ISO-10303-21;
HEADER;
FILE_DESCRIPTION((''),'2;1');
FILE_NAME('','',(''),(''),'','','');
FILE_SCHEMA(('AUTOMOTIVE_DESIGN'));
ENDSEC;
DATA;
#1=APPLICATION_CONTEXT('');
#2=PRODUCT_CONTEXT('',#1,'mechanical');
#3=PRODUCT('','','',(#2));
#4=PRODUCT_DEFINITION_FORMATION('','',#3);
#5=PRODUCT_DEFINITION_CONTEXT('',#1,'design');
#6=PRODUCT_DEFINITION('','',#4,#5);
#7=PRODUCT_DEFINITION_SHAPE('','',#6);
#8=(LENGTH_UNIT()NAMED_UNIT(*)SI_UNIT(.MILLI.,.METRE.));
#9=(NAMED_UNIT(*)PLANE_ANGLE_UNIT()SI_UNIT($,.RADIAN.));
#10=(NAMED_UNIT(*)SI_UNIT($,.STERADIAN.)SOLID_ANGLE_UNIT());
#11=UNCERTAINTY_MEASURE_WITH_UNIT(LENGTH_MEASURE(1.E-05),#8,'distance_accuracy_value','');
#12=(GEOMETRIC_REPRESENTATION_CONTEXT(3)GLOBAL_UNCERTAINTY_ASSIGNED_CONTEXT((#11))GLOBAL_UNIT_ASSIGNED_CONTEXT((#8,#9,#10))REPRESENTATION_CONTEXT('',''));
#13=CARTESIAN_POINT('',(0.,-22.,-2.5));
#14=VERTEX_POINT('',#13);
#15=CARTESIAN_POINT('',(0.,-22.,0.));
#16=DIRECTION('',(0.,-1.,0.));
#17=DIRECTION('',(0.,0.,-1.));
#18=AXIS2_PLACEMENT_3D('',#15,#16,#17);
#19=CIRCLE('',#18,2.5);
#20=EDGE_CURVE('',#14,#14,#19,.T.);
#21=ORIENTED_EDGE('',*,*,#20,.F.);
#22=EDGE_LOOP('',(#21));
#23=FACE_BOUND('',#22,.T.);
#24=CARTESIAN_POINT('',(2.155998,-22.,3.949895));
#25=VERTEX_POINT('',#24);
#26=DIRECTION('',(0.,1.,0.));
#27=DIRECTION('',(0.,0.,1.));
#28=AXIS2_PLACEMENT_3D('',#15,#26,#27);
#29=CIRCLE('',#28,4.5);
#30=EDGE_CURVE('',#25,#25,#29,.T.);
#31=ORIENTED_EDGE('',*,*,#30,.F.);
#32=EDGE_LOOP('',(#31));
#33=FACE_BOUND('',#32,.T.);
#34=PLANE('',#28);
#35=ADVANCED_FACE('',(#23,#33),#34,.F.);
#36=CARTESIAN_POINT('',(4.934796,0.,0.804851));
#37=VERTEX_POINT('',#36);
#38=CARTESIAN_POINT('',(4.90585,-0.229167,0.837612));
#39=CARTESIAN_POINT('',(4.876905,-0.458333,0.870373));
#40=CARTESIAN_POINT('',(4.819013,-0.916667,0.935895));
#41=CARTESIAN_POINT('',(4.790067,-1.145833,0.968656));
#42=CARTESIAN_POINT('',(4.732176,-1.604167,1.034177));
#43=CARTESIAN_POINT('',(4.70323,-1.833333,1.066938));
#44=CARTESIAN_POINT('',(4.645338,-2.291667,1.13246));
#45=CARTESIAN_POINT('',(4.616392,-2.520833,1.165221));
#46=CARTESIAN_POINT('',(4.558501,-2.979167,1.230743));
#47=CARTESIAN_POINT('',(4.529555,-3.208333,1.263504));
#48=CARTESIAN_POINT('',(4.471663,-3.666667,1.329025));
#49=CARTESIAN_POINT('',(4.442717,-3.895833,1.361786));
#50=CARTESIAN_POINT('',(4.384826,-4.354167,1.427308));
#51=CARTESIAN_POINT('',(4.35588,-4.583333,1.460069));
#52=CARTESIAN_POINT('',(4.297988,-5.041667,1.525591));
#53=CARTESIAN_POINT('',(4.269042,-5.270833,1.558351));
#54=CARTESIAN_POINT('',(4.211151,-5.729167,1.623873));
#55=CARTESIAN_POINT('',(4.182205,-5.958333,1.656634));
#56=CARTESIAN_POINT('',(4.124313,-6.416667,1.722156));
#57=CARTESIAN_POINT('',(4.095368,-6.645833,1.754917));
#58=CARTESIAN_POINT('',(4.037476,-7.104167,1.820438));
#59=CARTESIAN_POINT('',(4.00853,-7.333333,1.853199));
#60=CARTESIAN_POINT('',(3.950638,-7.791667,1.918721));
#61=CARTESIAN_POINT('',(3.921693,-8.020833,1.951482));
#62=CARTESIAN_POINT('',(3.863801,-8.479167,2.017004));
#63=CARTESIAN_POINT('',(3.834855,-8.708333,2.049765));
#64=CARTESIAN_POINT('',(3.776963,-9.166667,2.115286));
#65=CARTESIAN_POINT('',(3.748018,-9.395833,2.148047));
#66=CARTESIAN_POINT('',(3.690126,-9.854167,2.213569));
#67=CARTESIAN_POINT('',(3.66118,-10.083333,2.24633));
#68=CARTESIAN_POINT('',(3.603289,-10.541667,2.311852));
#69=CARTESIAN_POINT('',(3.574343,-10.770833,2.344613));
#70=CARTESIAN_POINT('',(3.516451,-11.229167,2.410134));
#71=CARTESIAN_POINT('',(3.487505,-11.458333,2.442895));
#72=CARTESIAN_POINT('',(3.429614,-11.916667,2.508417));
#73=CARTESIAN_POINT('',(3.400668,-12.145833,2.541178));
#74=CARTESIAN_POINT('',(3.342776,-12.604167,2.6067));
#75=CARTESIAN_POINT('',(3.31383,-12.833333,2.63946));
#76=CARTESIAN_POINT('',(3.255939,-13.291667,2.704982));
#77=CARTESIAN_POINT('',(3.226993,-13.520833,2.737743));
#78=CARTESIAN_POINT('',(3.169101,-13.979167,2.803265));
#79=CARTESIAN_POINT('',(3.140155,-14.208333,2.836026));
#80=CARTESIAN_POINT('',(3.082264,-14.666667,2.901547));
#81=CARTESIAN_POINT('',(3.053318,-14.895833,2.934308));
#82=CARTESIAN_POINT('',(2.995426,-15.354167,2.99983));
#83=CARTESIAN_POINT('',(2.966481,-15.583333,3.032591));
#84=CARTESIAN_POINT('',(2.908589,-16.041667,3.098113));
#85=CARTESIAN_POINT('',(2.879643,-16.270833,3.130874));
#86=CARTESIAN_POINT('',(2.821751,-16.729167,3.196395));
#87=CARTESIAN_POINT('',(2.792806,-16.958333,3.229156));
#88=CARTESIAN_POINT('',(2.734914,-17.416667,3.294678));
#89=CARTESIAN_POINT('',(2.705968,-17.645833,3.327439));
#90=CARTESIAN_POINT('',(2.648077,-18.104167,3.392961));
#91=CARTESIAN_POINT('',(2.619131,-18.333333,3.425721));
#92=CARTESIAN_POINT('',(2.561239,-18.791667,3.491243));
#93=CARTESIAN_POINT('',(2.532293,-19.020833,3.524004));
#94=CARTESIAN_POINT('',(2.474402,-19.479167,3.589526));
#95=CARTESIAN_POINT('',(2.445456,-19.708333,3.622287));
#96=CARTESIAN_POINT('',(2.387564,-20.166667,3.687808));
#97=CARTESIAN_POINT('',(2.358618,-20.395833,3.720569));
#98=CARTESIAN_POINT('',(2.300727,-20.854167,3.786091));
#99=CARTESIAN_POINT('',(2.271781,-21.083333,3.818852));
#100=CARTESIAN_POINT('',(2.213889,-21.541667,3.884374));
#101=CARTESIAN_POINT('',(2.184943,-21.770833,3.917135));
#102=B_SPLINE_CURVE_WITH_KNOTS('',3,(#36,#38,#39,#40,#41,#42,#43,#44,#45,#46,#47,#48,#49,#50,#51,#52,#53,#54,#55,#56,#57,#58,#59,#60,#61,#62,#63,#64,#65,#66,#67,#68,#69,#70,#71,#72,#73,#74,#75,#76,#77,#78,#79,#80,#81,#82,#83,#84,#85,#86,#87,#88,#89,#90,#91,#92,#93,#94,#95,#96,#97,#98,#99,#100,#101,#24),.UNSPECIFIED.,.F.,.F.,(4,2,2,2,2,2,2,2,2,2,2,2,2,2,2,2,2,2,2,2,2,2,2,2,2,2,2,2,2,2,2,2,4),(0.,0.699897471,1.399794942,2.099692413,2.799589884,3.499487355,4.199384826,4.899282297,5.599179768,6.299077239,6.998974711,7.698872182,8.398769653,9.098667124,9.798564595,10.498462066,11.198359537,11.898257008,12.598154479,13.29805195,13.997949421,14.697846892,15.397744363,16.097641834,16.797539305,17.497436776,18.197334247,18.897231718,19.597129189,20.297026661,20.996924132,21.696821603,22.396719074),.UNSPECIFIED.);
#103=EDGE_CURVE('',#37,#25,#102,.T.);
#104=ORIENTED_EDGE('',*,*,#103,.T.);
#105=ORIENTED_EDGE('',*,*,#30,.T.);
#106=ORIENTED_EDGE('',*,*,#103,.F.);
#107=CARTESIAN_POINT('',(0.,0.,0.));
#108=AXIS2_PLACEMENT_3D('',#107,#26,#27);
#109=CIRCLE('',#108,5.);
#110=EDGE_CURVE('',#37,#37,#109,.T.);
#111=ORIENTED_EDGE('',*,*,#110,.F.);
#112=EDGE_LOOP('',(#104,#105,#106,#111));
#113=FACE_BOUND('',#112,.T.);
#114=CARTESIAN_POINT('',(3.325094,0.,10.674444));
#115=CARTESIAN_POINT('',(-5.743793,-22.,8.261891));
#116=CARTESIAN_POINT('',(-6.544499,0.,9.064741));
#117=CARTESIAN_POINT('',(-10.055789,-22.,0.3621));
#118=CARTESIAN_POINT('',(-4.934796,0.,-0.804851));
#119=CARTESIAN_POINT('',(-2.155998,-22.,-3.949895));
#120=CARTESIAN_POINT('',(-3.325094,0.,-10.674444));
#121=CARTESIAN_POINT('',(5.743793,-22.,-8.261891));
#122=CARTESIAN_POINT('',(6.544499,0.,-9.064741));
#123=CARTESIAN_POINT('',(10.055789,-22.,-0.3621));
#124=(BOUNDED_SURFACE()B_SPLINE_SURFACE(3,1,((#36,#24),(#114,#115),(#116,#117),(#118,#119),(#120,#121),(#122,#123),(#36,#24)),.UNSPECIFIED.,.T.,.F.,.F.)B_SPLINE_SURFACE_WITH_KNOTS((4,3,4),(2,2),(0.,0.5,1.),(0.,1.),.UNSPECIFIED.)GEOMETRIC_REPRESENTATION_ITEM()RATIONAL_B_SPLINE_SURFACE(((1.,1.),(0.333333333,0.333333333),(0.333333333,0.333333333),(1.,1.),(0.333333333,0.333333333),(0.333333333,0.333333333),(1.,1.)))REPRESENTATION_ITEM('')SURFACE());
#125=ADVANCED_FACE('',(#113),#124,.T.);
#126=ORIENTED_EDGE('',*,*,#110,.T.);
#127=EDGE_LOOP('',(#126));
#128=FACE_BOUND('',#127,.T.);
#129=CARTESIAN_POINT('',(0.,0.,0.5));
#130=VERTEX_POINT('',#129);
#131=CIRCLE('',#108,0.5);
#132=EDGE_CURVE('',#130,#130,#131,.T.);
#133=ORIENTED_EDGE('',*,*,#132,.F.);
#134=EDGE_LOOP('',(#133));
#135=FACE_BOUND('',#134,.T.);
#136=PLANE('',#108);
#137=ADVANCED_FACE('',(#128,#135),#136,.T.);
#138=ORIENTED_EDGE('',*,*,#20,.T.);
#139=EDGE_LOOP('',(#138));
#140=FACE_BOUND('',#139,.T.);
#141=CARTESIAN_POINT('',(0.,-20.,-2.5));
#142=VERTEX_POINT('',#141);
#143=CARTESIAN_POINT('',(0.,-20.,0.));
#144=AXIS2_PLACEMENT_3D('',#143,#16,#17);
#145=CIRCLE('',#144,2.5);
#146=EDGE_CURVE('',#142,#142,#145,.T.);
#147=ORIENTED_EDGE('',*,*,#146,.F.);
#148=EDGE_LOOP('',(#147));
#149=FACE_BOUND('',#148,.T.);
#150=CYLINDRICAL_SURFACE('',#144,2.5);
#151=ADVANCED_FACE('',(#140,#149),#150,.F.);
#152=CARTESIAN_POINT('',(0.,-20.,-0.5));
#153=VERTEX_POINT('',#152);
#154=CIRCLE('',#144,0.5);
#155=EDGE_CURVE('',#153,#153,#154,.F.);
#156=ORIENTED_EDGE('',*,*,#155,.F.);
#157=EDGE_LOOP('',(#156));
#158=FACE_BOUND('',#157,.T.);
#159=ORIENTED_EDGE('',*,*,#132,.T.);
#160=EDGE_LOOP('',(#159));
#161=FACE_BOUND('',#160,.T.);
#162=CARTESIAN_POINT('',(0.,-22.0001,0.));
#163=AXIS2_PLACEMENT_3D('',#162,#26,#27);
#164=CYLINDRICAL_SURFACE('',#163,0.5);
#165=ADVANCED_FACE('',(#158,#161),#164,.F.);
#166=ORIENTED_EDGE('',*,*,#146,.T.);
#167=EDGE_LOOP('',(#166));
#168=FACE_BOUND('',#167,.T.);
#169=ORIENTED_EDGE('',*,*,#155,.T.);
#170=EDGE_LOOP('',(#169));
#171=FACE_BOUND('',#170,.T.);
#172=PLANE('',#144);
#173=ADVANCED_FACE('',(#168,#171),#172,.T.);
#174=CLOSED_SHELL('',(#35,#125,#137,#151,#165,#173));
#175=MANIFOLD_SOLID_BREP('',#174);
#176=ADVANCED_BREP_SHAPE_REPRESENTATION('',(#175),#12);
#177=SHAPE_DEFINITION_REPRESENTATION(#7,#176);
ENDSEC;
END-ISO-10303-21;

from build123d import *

# Parameters (mm, degrees)
SKETCH4_R          = 0.5
CUT_EXTRUDE1_DEPTH = 24.108440155
SKETCH5_R          = 2.5
CUT_EXTRUDE2_DEPTH = 2


with BuildPart() as part:
    # Loft1: read off the stored shape, not the designer's step
    # Loft1: loft between two sections, ruled curve by curve
    loft1_from = [
        Edge.make_bspline([(4.934796286, 0, 0.8048513), (3.325093686, 0, 10.674443872), (-6.544498886, 0, 9.064741272), (-4.934796286, 0, -0.8048513), (-3.325093686, 0, -10.674443872), (6.544498886, 0, -9.064741272), (4.934796286, 0, 0.8048513)], [0, 0, 0, 0, 0.5, 0.5, 0.5, 1, 1, 1, 1], 3, [1, 0.333333333, 0.333333333, 1, 0.333333333, 0.333333333, 1]),
    ]
    loft1_to = [
        Edge.make_bspline([(2.155997578, -22, 3.949895498), (-5.743793417, -22, 8.261890654), (-10.055788574, -22, 0.362099658), (-2.155997578, -22, -3.949895498), (5.743793417, -22, -8.261890654), (10.055788574, -22, -0.362099658), (2.155997578, -22, 3.949895498)], [0, 0, 0, 0, 0.5, 0.5, 0.5, 1, 1, 1, 1], 3, [1, 0.333333333, 0.333333333, 1, 0.333333333, 0.333333333, 1]),
    ]
    loft1 = Solid(Shell([*[Face.make_surface_from_curves(loft1_from[k], loft1_to[k]) for k in range(1)], Face(Wire(loft1_from)), Face(Wire(loft1_to))]))
    add(loft1)

    # Sketch4 → Cut-Extrude1 (cut, through all)
    with BuildSketch(Plane(origin=(0, 0, 0), x_dir=(1, 0, 0), z_dir=(0, 1, 0))):
        with Locations(Location((0, 0, 0), (0, 0, 270))):
            Circle(SKETCH4_R)
    extrude(amount=-CUT_EXTRUDE1_DEPTH, mode=Mode.SUBTRACT)

    # Sketch5 → Cut-Extrude2 (cut)
    with BuildSketch(Plane.XZ.offset(22)):
        with Locations(Location((0, 0, 0), (0, 0, 270))):
            Circle(SKETCH5_R)
    extrude(amount=-CUT_EXTRUDE2_DEPTH, mode=Mode.SUBTRACT)


solid = part.part
